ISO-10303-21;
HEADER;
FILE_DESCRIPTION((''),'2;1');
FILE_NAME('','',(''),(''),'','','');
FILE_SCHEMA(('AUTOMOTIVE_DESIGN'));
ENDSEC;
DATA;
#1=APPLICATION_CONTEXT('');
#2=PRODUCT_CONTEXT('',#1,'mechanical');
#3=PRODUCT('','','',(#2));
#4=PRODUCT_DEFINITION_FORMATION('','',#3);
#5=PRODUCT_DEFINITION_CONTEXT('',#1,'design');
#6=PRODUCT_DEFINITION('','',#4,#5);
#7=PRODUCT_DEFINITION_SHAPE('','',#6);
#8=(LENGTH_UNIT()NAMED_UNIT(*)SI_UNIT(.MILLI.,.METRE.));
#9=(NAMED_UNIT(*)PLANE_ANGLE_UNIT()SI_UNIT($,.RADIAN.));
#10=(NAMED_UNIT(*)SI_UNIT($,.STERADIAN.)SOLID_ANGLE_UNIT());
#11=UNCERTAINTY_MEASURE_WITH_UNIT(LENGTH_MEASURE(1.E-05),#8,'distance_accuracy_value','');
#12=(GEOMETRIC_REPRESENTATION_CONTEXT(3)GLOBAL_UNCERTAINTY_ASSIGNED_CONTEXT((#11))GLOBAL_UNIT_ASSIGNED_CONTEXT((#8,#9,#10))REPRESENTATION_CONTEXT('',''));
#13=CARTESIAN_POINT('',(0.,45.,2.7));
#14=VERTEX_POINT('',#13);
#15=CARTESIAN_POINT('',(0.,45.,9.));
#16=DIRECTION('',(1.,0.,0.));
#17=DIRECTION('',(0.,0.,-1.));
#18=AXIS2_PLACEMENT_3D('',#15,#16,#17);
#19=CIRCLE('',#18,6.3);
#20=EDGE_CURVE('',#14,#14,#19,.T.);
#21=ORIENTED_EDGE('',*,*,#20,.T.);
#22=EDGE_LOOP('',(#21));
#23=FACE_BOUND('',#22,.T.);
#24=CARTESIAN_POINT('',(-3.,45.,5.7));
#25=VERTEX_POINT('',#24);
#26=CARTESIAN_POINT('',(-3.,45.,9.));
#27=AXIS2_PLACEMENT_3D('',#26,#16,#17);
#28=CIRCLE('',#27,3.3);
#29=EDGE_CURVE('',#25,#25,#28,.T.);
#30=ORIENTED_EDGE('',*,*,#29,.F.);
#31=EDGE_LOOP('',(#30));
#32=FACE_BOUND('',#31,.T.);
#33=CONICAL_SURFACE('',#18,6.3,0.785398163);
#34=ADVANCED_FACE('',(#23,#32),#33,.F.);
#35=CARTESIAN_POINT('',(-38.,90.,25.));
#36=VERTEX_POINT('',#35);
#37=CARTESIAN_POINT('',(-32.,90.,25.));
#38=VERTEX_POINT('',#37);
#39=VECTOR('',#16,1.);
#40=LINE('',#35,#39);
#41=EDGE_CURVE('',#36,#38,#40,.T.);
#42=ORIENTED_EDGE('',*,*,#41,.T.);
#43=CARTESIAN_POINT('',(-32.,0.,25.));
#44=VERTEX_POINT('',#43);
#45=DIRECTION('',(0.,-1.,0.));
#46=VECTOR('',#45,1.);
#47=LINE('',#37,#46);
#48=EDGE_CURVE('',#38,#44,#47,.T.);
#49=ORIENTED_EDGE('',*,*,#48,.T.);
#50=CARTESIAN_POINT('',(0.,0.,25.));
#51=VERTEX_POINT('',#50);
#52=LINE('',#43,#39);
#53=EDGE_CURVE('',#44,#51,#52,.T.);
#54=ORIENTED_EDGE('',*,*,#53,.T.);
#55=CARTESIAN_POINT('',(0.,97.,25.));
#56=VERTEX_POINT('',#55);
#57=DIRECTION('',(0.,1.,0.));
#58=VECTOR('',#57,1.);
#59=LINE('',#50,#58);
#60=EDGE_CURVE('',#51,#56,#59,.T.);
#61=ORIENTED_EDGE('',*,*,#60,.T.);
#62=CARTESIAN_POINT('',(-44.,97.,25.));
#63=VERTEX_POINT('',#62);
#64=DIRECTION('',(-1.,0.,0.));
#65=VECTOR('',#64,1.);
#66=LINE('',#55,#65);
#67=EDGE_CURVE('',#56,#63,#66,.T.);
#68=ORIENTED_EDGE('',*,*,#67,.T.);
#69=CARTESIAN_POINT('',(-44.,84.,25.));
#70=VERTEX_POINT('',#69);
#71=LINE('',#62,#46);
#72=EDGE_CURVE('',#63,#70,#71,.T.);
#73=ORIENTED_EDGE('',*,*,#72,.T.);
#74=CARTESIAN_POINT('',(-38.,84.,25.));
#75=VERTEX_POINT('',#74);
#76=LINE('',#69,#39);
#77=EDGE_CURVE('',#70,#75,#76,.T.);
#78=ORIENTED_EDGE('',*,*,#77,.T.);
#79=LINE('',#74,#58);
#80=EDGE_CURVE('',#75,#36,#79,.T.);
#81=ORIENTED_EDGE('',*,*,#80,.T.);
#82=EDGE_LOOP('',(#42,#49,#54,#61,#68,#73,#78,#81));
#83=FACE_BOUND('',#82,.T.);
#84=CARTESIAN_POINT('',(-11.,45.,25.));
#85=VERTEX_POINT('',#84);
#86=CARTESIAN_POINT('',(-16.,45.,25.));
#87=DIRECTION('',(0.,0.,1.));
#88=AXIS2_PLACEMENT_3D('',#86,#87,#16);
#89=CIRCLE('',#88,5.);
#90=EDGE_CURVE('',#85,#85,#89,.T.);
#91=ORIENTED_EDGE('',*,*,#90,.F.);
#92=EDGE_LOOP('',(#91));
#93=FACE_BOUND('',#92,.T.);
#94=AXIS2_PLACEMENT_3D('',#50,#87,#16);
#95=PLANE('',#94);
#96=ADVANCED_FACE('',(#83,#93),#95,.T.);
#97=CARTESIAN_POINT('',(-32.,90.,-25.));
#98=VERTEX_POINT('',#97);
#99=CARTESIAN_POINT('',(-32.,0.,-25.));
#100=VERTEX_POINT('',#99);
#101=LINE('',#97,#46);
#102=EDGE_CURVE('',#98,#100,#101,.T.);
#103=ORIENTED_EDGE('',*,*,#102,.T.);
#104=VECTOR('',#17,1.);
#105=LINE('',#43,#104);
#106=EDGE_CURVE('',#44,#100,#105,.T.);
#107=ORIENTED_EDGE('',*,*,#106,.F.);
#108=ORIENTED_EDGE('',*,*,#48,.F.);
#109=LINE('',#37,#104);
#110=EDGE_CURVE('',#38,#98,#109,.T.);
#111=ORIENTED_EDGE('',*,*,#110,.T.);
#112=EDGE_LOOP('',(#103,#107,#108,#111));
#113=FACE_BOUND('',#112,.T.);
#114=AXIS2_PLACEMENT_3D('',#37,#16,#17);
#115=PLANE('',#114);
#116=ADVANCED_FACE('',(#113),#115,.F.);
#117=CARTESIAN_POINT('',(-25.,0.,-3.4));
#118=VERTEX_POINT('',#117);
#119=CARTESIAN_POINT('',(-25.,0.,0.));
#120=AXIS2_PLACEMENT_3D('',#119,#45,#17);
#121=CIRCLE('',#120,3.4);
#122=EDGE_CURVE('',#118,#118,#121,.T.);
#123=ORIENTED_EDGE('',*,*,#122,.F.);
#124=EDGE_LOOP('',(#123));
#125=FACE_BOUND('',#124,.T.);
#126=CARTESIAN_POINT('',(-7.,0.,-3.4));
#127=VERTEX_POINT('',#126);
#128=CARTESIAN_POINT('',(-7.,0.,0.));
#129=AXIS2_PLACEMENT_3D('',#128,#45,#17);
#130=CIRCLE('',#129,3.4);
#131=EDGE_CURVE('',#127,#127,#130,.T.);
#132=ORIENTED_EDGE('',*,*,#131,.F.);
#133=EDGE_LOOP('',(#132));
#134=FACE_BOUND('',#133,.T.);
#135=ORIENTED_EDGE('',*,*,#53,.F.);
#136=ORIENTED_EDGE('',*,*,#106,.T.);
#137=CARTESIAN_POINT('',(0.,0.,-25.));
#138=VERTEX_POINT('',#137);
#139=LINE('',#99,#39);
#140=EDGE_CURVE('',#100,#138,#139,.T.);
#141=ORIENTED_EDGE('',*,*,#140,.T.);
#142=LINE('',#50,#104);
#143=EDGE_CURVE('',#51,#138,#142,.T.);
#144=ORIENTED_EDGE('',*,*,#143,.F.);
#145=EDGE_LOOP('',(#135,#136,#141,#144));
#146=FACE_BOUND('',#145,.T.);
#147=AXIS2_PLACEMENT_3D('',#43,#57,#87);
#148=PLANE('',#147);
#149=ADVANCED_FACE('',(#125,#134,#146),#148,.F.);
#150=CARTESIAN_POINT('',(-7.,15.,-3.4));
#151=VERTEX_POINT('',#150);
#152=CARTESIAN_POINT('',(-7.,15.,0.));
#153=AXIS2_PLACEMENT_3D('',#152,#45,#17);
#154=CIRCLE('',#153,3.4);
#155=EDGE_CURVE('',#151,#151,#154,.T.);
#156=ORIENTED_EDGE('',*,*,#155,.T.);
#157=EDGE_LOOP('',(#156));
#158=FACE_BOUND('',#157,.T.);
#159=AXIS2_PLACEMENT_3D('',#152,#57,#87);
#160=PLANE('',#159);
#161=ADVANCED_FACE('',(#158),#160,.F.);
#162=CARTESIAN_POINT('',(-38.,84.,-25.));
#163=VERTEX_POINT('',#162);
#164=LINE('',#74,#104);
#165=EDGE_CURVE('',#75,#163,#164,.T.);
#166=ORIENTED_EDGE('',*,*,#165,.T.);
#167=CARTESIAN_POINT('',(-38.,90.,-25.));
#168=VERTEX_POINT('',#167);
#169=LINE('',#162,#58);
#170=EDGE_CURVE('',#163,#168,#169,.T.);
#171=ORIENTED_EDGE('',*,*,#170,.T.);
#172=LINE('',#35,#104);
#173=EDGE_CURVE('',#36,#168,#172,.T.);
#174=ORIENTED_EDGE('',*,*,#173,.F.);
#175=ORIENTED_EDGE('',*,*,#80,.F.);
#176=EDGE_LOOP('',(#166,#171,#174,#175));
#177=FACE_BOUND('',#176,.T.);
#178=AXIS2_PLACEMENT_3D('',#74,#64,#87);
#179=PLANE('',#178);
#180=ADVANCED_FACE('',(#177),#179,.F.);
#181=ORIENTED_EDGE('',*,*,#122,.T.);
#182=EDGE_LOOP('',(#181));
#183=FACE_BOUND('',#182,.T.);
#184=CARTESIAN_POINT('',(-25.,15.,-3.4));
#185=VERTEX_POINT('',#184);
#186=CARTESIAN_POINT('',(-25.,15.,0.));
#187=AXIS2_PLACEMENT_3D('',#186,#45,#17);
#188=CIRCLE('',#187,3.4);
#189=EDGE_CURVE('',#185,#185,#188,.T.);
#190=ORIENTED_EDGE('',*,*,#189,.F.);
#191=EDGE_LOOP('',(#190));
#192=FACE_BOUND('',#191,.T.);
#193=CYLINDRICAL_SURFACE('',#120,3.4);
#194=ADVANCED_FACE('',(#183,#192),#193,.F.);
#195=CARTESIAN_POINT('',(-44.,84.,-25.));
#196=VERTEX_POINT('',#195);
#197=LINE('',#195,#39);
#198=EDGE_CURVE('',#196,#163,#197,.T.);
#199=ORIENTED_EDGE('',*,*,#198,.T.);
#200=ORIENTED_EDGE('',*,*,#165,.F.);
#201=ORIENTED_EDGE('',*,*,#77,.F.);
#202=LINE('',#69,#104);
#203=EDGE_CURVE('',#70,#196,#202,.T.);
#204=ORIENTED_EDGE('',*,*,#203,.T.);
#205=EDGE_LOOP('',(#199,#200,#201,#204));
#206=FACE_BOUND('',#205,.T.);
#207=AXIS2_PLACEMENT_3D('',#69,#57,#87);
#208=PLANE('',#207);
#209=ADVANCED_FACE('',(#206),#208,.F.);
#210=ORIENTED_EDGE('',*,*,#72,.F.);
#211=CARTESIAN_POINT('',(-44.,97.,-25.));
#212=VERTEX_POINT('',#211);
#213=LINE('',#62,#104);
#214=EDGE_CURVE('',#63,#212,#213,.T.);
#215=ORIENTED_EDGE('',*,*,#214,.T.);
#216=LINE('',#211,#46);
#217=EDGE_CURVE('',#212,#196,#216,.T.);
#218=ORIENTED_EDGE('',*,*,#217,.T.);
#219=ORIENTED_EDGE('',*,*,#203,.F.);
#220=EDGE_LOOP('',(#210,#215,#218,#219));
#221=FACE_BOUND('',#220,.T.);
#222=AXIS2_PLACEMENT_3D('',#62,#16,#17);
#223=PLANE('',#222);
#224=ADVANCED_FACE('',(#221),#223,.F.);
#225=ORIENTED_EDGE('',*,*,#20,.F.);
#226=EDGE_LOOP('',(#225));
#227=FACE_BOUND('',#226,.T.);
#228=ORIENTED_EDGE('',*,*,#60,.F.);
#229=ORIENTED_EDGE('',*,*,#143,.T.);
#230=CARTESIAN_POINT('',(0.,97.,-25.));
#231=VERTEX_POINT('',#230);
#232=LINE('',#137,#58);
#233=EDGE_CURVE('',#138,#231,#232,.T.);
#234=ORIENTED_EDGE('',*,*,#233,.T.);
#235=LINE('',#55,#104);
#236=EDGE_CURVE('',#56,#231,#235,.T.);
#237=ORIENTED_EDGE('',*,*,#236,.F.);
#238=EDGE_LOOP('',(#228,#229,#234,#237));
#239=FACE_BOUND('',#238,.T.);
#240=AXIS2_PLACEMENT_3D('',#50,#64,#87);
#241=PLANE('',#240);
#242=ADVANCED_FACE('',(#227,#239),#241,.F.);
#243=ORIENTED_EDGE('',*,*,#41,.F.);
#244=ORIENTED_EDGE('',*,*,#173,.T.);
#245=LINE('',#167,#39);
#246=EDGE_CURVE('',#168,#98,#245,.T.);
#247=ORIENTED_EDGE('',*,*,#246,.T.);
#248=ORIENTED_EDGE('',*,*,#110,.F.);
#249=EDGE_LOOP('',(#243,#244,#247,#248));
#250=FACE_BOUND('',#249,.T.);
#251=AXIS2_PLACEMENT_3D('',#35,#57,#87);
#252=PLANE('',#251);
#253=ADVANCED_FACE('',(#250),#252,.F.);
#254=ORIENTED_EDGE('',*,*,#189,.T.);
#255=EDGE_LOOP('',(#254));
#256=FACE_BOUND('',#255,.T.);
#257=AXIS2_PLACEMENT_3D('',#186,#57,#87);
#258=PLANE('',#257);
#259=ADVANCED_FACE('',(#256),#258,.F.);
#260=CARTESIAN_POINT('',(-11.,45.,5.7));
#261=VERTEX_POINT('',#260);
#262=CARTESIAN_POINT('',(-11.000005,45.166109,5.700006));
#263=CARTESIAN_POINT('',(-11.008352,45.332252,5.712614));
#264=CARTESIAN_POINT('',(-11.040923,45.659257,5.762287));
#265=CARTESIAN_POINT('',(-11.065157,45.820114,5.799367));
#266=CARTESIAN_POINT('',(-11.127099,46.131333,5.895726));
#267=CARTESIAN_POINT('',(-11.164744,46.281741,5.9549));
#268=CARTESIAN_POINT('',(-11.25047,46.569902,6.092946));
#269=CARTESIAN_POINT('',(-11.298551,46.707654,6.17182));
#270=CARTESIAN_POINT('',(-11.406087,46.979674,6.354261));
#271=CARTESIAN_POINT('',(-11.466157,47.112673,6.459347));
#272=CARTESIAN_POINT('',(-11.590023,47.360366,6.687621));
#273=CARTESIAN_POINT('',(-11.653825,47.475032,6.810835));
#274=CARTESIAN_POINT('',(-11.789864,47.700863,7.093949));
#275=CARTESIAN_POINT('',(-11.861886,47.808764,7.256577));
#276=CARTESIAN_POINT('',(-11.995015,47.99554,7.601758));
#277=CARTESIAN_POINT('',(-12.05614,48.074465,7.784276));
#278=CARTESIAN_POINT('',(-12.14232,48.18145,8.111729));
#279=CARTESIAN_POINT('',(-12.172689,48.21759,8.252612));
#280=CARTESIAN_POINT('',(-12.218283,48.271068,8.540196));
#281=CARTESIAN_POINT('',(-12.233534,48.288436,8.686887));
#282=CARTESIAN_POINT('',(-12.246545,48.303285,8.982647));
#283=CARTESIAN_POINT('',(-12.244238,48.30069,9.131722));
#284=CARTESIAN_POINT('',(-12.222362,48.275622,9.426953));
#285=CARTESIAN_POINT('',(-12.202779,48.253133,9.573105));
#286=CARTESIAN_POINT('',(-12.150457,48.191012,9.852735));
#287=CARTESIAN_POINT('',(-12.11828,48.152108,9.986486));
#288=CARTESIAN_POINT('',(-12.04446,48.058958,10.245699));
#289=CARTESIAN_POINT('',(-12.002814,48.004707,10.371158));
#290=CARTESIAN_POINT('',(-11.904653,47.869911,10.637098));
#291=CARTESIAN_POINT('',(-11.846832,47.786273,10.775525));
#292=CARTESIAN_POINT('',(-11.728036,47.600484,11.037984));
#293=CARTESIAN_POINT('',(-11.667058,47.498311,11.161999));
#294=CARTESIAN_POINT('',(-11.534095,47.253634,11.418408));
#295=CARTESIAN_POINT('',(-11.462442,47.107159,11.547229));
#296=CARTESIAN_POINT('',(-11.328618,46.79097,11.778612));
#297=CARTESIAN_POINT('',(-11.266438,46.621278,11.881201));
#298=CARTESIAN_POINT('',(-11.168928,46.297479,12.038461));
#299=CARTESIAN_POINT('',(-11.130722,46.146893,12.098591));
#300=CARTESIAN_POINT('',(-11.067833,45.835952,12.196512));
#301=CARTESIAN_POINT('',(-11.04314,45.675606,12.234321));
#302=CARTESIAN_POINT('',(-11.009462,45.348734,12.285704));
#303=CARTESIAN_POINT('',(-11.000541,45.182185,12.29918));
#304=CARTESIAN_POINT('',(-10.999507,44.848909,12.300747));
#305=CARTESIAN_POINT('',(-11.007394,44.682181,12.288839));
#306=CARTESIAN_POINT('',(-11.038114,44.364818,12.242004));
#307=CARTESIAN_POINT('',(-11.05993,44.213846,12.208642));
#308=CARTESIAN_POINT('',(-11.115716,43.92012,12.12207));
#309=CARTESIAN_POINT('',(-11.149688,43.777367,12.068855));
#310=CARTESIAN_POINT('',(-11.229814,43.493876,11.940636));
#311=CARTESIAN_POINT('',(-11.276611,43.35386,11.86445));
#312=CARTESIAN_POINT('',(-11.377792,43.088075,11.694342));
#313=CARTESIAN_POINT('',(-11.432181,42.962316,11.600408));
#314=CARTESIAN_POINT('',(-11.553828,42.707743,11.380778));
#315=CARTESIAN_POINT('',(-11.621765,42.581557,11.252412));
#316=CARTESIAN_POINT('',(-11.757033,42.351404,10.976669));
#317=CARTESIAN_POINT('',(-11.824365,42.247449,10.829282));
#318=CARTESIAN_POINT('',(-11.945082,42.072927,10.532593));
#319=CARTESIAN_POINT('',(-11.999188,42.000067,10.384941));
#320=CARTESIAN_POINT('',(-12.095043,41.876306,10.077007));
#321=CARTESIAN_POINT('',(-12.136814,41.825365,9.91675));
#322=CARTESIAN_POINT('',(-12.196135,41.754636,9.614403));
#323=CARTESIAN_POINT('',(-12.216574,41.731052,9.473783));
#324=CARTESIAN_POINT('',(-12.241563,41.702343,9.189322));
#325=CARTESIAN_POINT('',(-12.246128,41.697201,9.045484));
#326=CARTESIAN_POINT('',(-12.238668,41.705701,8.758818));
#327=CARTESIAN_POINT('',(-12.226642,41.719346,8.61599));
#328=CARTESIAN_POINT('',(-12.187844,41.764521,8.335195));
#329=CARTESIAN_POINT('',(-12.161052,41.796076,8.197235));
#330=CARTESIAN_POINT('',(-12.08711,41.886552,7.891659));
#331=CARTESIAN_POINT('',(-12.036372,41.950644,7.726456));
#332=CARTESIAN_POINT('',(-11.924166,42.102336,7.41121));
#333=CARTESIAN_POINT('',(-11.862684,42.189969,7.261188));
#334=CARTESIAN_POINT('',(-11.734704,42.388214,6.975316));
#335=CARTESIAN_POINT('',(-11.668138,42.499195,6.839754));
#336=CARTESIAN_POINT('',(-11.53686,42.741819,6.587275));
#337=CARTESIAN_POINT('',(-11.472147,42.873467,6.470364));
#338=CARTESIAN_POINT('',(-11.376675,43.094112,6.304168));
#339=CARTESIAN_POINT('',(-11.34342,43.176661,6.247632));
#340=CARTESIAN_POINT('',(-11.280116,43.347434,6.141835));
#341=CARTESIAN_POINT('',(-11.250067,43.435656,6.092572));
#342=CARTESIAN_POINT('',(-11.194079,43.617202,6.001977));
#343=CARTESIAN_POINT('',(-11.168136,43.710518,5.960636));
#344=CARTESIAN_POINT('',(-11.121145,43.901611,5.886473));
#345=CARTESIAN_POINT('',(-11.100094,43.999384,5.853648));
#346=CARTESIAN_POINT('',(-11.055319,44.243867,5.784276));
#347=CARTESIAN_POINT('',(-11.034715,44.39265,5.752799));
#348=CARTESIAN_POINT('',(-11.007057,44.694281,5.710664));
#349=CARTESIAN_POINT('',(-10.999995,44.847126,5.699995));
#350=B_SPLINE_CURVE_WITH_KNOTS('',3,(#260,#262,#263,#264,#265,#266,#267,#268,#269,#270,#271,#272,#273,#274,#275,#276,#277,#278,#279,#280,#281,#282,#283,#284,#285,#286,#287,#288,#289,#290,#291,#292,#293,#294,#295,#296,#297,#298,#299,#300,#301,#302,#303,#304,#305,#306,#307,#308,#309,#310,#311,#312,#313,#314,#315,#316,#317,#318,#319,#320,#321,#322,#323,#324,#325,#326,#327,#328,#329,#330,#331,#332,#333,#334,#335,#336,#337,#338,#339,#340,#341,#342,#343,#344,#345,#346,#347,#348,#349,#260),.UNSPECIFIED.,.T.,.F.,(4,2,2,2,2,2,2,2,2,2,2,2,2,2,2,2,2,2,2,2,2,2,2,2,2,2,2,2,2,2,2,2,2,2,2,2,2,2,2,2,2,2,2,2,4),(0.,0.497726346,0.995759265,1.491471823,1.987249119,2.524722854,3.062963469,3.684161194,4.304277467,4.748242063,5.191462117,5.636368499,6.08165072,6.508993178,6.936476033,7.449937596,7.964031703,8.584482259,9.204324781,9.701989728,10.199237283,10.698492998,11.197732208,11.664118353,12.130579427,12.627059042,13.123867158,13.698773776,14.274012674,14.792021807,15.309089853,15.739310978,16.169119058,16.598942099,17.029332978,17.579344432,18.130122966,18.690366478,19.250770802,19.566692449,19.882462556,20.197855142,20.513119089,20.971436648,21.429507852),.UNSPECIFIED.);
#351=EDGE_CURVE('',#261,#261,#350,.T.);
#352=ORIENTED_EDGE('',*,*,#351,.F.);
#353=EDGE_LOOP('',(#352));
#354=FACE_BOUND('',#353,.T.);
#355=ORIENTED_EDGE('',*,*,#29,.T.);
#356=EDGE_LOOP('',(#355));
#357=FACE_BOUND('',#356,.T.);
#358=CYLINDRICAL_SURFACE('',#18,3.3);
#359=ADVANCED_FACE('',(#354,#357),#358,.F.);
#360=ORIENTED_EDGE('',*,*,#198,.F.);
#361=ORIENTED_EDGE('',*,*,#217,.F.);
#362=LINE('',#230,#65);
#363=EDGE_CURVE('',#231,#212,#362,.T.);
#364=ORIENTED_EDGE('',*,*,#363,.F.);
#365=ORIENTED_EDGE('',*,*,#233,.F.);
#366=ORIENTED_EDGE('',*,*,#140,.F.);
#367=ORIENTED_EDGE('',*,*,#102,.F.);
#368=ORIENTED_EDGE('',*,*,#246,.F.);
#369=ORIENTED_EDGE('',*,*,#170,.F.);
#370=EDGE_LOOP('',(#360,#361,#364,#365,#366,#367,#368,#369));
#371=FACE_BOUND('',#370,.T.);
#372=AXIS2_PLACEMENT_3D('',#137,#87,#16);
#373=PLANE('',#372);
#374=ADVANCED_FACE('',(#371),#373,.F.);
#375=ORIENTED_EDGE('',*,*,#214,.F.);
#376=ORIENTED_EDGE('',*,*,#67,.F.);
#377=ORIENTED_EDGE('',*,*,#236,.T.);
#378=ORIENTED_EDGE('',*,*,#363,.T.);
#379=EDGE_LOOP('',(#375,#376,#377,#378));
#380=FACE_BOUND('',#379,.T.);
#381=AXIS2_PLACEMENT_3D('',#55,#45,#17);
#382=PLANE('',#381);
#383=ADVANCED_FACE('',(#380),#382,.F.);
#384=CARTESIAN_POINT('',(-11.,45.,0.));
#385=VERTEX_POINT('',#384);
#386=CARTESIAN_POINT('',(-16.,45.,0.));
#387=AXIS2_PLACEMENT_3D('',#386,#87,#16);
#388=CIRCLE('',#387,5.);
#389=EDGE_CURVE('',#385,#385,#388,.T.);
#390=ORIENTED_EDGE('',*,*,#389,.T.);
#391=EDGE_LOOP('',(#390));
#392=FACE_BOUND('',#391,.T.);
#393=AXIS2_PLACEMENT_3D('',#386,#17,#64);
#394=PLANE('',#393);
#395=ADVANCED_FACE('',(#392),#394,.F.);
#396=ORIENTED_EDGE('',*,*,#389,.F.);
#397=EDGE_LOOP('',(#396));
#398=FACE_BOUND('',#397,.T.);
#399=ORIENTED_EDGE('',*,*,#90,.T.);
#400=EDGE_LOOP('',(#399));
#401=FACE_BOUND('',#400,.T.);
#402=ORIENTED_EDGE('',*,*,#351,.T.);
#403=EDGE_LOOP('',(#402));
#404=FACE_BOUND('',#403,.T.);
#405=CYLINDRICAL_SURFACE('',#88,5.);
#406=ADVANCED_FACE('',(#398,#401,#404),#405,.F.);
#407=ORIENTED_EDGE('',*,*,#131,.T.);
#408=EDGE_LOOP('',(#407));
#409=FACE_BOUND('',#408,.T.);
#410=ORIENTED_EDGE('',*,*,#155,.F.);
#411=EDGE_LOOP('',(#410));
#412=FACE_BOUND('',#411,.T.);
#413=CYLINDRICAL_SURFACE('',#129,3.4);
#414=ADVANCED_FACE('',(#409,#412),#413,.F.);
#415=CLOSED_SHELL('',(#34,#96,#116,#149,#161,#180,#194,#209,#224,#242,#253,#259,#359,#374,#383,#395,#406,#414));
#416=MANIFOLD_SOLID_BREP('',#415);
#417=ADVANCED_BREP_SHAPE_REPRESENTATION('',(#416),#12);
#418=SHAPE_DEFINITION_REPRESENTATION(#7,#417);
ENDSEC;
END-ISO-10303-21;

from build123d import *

# Parameters (mm, degrees)
BOSS_EXTRUDE1_DEPTH        = 25
F_10_0MM_DOWEL_HOLE1_D     = 10
F_10_0MM_DOWEL_HOLE1_DEPTH = 25
M8_TAPPED_HOLE1_D          = 6.8
M8_TAPPED_HOLE1_DEPTH      = 15


# Read off the part's stored shape, not the designer's step: CSK for M6 Countersunk Flat Head Screw1
with BuildPart() as part:
    # Sketch1 → Boss-Extrude1 (new, symmetric)
    with BuildSketch(Plane.XY):
        Polygon((0, 0), (0, 97), (-44, 97), (-44, 84), (-38, 84), (-38, 90), (-32, 90), (-32, 0), align=None)
    extrude(amount=BOSS_EXTRUDE1_DEPTH, both=True)

    # Ø10.0mm Dowel Hole1
    with Locations(Plane.XY.offset(25)):
        with Locations((-16, 45)):
            Hole(F_10_0MM_DOWEL_HOLE1_D / 2, depth=F_10_0MM_DOWEL_HOLE1_DEPTH)

    # M8 Tapped Hole1
    with Locations(Plane(origin=(0, 0, 0), x_dir=(-1, 0, 0), z_dir=(0, -1, 0))):
        with Locations((7, 0), (25, 0)):
            Hole(M8_TAPPED_HOLE1_D / 2, depth=M8_TAPPED_HOLE1_DEPTH)

    # CSK for M6 Countersunk Flat Head Scr 2 → CSK for M6 Countersunk Flat Head Screw1 (revolve, cut)
    with BuildSketch(Plane(origin=(0, 45, 9), x_dir=(0, 1, 0), z_dir=(0, 0, -1))):
        Polygon((0, -12.244302381), (3.3, -12.244302381), (3.3, -3), (6.3, 0), (0, 0), align=None)
    revolve(axis=Axis((0, 45, 9), (1, 0, 0)), mode=Mode.SUBTRACT)


solid = part.part
